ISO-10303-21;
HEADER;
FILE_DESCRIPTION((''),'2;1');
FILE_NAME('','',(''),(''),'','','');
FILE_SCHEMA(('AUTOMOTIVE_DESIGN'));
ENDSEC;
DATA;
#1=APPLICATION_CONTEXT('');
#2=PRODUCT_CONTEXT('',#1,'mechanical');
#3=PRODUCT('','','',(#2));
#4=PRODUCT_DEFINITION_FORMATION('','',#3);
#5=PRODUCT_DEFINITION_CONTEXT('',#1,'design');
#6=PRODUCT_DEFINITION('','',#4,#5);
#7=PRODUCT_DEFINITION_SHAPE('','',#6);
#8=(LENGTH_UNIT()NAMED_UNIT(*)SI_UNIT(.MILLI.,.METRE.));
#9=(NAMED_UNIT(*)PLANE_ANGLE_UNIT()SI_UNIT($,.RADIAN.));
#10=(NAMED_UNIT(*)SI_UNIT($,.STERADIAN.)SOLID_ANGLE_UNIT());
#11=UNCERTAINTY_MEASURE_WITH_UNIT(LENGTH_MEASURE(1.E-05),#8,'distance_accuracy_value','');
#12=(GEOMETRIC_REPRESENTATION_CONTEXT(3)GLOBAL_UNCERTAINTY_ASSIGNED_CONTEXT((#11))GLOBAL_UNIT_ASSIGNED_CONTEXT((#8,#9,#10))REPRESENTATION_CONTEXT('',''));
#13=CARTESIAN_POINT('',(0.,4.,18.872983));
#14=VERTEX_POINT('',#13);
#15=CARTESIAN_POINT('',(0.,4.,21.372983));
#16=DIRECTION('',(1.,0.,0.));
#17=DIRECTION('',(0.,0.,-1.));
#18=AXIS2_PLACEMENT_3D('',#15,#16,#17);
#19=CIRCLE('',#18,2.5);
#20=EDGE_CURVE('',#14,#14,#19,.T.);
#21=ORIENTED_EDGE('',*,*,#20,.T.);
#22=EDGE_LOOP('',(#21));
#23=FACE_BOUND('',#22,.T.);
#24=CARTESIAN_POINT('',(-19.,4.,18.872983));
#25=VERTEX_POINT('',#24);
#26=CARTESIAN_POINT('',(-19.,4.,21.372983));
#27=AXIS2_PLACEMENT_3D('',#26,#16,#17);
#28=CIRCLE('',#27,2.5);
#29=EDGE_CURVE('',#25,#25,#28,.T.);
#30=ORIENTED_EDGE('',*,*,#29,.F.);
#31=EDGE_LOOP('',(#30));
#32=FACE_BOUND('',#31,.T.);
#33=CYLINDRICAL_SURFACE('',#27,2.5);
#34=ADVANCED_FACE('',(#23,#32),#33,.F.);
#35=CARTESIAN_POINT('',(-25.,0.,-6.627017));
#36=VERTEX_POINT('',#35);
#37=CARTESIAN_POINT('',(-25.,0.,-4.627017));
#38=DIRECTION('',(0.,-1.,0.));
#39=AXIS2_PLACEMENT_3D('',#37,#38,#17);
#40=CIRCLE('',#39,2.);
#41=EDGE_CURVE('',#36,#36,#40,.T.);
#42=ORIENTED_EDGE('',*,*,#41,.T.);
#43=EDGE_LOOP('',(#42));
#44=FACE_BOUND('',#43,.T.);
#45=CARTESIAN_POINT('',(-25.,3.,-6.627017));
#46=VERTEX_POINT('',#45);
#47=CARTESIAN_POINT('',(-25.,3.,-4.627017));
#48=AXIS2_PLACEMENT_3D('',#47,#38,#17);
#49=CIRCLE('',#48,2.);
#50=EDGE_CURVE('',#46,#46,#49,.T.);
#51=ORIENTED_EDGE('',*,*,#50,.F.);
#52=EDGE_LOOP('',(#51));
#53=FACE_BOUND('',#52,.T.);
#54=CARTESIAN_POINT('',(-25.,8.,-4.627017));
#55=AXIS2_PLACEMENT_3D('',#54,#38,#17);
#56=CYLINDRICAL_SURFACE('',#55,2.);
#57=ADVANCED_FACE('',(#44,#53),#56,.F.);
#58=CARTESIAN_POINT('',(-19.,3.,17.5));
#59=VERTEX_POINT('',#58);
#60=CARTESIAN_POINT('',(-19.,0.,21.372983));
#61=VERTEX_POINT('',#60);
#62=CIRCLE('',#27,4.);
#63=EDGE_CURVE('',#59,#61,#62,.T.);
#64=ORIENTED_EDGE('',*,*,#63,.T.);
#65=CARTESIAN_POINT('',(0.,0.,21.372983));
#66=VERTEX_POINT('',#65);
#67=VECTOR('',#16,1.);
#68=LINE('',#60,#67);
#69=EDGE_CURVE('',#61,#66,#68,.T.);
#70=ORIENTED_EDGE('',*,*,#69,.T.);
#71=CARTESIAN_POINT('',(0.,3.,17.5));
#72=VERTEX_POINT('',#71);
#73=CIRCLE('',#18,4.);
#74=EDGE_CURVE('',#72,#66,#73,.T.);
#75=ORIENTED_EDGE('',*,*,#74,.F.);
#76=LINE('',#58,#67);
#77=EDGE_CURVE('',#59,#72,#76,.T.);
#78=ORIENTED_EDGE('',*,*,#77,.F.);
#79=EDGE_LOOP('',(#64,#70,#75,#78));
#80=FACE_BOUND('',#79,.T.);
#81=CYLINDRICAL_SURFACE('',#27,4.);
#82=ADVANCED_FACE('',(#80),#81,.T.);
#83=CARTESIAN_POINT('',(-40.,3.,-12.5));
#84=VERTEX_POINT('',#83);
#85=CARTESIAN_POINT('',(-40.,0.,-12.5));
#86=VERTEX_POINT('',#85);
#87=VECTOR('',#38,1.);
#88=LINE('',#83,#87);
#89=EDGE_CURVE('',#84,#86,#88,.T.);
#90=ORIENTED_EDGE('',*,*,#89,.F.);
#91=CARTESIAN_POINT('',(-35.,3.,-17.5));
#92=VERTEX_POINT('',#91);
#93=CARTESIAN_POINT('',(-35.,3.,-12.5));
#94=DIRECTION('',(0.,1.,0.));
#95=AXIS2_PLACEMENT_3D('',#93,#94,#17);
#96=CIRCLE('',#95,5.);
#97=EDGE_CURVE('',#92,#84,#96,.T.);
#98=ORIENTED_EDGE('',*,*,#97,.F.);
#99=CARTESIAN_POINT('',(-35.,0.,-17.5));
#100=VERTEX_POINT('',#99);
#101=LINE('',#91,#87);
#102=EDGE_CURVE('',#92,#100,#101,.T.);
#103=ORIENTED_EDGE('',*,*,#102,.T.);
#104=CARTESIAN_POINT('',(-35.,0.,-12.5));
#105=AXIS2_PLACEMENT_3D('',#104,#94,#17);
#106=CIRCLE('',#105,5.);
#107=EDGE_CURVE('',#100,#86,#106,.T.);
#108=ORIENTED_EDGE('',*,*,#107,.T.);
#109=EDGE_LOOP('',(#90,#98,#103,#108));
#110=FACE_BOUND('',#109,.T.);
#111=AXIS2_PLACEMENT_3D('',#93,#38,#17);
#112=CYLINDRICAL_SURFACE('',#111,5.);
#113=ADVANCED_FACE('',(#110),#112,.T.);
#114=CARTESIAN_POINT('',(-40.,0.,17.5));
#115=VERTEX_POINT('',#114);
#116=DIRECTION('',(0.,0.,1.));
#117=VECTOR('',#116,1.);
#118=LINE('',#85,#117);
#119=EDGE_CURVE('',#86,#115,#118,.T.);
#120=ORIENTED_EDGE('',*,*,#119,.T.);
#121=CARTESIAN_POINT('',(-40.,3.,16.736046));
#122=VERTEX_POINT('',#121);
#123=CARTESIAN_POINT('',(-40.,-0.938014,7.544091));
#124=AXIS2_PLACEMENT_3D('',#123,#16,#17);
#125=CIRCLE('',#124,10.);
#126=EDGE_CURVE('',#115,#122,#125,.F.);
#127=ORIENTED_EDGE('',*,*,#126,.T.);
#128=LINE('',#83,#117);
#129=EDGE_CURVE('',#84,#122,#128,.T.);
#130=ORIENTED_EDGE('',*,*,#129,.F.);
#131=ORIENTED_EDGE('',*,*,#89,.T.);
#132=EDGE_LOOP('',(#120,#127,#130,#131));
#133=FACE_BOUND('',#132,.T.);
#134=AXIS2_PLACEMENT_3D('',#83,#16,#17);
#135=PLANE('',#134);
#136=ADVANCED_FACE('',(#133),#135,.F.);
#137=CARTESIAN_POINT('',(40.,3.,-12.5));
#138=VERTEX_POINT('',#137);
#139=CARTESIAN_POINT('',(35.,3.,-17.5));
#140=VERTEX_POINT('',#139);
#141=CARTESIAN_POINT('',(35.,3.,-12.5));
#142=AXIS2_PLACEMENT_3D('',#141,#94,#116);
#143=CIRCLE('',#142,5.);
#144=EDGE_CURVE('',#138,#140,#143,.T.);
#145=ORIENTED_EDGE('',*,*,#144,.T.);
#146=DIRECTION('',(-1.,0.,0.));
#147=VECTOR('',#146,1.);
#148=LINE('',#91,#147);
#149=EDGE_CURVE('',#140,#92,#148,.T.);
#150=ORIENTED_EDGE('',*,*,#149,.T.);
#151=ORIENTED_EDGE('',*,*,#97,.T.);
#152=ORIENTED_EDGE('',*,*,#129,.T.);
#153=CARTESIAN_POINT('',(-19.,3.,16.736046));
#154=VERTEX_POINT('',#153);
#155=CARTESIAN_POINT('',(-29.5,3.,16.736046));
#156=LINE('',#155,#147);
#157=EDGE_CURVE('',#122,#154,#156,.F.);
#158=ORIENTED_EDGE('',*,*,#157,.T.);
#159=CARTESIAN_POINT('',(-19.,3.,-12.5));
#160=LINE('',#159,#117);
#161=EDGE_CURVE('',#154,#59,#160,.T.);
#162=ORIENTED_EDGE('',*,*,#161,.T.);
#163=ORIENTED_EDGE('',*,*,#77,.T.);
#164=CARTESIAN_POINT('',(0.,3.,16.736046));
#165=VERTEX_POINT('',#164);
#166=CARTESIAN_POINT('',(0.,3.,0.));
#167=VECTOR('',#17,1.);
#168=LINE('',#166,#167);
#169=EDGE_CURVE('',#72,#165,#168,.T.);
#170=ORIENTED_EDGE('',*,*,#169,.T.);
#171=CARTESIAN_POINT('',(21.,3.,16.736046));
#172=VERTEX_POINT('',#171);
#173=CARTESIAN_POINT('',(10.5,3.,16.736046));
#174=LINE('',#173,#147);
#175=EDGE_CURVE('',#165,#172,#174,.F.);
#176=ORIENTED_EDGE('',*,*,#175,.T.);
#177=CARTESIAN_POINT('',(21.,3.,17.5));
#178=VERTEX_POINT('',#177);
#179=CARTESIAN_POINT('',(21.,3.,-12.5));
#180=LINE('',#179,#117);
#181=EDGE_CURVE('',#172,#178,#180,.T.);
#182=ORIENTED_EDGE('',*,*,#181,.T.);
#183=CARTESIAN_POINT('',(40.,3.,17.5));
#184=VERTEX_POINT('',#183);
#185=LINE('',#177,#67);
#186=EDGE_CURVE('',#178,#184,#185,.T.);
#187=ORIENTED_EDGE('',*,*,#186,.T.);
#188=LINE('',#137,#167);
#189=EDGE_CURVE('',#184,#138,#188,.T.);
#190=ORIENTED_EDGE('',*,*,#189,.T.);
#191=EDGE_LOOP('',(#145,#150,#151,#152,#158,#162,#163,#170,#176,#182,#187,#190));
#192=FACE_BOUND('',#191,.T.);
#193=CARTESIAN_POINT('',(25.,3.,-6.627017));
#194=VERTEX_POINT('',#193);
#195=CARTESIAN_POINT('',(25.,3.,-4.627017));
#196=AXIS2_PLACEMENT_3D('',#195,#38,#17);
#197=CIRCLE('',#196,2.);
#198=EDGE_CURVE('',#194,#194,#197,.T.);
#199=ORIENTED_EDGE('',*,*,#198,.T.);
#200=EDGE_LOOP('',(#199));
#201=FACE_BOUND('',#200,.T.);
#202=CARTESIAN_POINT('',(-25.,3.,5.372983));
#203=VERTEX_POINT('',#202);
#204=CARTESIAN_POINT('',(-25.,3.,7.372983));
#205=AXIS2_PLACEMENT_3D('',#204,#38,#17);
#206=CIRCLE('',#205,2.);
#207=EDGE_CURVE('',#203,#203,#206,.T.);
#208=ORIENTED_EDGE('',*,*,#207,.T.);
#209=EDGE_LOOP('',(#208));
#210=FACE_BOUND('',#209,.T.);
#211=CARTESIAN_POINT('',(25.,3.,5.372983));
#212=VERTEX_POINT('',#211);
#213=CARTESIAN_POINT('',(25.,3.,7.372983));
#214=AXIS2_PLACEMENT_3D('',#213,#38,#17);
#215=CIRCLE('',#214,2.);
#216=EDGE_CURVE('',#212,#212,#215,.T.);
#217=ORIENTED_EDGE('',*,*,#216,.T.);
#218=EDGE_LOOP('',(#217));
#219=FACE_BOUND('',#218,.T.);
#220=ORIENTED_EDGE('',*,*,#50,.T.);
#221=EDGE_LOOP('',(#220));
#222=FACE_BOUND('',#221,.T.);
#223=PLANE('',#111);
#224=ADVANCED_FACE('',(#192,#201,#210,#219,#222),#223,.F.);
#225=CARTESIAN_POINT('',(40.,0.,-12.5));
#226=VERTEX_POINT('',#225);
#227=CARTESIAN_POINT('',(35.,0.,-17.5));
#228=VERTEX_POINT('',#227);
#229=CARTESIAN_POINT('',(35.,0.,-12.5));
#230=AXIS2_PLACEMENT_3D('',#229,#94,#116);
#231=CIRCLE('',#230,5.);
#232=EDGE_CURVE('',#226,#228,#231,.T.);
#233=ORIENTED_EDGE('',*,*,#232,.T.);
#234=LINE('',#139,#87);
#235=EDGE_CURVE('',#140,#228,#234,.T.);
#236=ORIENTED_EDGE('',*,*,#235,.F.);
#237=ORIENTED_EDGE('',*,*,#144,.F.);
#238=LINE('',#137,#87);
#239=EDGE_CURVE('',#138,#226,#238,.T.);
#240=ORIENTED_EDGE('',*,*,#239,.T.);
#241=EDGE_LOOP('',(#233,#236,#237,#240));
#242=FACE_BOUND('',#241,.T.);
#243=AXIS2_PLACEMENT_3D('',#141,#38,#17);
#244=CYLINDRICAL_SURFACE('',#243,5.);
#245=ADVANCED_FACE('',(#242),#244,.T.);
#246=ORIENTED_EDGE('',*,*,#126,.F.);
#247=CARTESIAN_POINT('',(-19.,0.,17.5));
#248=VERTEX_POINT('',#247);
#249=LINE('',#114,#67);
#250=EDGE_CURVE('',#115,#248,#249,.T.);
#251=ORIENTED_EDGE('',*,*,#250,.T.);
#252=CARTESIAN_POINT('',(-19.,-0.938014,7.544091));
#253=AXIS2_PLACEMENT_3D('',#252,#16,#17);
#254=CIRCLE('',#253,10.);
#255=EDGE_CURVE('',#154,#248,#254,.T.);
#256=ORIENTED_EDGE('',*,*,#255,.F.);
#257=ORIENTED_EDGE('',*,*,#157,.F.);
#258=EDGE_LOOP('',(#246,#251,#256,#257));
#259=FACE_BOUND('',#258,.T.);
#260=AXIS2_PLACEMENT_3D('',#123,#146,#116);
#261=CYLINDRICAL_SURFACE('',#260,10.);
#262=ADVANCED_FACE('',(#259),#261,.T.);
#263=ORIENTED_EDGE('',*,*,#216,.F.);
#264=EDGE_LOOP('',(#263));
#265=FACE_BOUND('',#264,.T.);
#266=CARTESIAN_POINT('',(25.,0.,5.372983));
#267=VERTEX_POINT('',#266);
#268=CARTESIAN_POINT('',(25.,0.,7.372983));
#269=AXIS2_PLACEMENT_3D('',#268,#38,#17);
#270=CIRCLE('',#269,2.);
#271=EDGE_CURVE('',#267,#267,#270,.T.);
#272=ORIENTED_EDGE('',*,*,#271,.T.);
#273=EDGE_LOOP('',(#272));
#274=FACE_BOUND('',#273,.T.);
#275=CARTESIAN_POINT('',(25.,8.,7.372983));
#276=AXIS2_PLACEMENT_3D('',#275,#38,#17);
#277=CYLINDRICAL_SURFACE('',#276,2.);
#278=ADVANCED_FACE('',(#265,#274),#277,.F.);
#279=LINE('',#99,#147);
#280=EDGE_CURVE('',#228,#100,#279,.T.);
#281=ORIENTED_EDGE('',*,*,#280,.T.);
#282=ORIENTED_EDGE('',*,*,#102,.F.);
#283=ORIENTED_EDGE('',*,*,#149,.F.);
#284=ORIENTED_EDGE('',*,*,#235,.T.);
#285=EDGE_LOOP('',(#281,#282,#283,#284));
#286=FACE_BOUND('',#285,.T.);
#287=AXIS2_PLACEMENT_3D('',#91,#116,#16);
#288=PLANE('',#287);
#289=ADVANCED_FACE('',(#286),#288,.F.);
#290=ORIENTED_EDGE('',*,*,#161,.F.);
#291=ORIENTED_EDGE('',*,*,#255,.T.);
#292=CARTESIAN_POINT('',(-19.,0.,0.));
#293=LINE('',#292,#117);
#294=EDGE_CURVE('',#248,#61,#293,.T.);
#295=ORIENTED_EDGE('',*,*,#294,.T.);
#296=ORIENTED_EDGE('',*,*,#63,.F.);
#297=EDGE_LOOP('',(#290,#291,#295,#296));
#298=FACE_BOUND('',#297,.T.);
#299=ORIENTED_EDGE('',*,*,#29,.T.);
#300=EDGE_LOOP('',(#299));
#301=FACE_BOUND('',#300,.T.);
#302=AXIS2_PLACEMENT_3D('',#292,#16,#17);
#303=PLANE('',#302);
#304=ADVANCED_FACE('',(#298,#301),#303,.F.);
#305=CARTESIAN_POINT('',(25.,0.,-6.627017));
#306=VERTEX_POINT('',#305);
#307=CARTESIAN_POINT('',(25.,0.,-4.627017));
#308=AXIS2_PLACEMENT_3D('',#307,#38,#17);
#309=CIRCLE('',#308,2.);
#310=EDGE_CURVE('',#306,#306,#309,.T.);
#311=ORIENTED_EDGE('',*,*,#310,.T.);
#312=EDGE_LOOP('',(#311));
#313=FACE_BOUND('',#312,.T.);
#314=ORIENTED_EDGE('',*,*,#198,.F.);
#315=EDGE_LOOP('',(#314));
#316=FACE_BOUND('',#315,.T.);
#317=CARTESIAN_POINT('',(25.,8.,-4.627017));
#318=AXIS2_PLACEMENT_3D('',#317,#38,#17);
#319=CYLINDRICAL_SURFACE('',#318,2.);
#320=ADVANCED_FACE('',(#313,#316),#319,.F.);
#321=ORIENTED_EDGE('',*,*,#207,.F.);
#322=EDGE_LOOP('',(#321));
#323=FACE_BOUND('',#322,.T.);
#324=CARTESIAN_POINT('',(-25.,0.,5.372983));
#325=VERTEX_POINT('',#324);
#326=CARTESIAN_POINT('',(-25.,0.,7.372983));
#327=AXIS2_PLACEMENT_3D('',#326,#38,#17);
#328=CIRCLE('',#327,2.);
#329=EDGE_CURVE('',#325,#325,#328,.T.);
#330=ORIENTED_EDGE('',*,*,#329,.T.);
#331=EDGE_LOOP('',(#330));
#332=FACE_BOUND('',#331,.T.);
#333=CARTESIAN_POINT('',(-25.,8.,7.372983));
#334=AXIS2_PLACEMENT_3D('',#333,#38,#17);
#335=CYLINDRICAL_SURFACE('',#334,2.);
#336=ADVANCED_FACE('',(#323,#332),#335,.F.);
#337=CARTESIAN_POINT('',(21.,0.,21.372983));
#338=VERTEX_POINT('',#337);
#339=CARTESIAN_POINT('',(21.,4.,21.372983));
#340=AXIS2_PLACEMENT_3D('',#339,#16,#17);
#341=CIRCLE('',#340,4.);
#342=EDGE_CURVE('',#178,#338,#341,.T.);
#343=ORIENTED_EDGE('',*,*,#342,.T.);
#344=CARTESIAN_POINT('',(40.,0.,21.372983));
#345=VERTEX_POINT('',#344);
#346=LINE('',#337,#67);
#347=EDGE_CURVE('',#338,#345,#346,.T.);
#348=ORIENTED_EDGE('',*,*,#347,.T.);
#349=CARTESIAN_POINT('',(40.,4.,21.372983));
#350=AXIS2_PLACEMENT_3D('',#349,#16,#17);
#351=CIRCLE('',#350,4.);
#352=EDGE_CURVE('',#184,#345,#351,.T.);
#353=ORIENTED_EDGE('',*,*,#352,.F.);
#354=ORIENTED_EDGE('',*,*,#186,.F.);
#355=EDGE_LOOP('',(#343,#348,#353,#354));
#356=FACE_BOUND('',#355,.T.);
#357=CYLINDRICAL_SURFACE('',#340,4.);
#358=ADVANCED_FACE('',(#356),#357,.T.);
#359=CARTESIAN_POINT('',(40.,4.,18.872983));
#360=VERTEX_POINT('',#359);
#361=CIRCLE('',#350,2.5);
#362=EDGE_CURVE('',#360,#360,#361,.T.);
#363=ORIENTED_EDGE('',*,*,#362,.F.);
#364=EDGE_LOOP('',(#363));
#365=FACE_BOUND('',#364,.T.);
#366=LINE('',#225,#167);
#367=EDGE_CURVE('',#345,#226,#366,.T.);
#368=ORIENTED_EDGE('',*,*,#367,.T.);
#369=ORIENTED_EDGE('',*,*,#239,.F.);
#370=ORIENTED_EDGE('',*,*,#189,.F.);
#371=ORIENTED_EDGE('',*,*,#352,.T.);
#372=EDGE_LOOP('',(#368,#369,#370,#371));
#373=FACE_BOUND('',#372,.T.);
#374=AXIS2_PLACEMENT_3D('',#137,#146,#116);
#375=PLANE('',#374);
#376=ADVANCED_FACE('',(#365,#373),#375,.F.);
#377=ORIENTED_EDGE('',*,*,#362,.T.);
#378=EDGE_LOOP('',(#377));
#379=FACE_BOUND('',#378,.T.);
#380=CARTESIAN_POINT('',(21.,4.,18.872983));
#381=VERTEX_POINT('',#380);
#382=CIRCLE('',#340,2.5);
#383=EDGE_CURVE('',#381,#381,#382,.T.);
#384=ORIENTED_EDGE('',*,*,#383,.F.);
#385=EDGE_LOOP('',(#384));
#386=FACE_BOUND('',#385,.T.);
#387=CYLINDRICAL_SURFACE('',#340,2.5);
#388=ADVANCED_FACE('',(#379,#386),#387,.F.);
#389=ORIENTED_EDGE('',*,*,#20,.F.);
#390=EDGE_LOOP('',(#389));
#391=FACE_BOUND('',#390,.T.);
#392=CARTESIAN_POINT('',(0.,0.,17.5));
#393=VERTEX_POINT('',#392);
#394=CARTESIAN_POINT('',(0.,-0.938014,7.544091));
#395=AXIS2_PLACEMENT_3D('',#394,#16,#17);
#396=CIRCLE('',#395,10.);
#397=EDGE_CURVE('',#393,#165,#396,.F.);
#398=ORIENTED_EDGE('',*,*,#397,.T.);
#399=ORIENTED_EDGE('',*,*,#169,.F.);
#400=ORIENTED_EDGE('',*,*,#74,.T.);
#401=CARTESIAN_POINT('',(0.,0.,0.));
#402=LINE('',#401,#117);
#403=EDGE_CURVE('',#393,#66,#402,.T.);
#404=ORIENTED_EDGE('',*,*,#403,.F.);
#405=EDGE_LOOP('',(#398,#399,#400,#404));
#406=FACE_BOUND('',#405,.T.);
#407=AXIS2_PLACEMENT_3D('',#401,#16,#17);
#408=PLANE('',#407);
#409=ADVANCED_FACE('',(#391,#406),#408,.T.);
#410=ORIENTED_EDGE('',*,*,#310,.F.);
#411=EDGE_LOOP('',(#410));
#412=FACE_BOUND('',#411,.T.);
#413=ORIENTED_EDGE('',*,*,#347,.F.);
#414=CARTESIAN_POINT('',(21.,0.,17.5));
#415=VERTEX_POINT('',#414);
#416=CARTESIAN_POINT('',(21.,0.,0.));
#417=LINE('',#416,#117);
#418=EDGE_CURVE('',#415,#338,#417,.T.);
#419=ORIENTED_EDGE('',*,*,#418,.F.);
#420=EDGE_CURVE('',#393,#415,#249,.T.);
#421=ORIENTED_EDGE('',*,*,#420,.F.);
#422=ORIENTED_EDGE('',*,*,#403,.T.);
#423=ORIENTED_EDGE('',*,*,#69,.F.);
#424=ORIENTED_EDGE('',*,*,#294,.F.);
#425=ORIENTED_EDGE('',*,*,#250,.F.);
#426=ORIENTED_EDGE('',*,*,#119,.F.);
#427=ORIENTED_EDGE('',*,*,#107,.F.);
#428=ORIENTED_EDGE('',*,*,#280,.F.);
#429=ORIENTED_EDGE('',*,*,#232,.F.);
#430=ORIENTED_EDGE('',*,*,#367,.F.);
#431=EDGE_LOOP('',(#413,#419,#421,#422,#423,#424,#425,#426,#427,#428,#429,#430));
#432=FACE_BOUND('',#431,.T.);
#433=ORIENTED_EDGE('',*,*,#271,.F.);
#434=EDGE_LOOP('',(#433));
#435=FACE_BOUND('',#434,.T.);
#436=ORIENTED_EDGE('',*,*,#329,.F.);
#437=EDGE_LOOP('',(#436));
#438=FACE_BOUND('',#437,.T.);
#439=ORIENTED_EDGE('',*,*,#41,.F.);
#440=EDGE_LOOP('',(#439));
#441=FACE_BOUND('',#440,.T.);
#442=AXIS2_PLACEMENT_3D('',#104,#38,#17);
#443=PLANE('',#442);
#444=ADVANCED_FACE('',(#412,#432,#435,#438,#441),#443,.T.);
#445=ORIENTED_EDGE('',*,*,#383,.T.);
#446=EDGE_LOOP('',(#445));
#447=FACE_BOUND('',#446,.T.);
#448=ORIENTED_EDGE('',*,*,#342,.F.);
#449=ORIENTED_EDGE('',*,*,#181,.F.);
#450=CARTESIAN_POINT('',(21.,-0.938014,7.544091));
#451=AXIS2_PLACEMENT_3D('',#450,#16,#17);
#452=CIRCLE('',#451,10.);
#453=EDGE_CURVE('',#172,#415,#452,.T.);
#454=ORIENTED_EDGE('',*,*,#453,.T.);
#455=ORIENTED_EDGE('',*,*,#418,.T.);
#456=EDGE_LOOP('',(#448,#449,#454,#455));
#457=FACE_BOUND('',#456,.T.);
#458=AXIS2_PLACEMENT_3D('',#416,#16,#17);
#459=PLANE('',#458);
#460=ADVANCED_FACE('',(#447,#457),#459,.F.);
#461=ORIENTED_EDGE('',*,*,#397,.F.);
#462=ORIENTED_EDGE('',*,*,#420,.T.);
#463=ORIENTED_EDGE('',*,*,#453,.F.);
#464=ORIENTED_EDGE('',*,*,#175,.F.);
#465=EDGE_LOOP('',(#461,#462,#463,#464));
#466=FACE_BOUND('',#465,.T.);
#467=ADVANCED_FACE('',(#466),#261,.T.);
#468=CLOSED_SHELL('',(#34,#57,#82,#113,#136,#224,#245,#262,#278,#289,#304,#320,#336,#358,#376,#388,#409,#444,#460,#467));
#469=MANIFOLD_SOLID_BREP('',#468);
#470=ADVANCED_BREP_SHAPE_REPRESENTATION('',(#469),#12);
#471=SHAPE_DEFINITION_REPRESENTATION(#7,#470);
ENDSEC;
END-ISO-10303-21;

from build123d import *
from OCP.BRepFilletAPI import BRepFilletAPI_MakeChamfer

# Parameters (mm, degrees)
BOSS_EXTRUDE1_DEPTH = 3
SKETCH2_R           = 2.5
BOSS_EXTRUDE2_DEPTH = 19
LPATTERN1_COUNT     = 2
LPATTERN1_PITCH     = 40
CHAMFER3_SIZE       = 1
CHAMFER3_SIZE2      = 0.624869352
FILLET1_R           = 10
SKETCH_1_R          = 2
CUT_EXTRUDE_1_DEPTH = 49.039445083


with BuildPart() as part:
    # Sketch1 → Boss-Extrude1 (new body)
    with BuildSketch(Plane(origin=(0, 0, 0), x_dir=(1, 0, 0), z_dir=(0, 1, 0))):
        with BuildLine():
            Line((-35, 17.5), (35, 17.5))
            ThreePointArc((35, 17.5), (38.535533906, 16.035533906), (40, 12.5))
            Line((40, 12.5), (40, -17.5))
            Line((40, -17.5), (-40, -17.5))
            Line((-40, -17.5), (-40, 12.5))
            ThreePointArc((-40, 12.5), (-38.535533906, 16.035533906), (-35, 17.5))
        make_face()
    extrude(amount=BOSS_EXTRUDE1_DEPTH)

    # Sketch2 → Boss-Extrude2 (add)
    with BuildSketch(Plane(origin=(40, 0, 0), x_dir=(0, 0, -1), z_dir=(1, 0, 0))):
        with BuildLine():
            Line((-21.372983346, 0), (-17.5, 0))
            Line((-17.5, 0), (-17.5, 3))
            ThreePointArc((-17.5, 3), (-23.822473089, 7.16227766), (-21.372983346, 0))
        make_face()
        with Locations((-21.372983346, 4)):
            Circle(SKETCH2_R, mode=Mode.SUBTRACT)
    boss_extrude2 = extrude(amount=-BOSS_EXTRUDE2_DEPTH)

    # LPattern1: Boss-Extrude2 ×2
    with Locations(*[(-i * LPATTERN1_PITCH, 0, 0) for i in range(1, LPATTERN1_COUNT)]):
        add(boss_extrude2)

    # Chamfer3: one chamfer whose edges measure the first distance from different faces: ONE call of the kernel's chamfer builder (chamfer() names one face for all edges)
    chamfer3_edges_1 = [part.edges().sort_by_distance(p)[0] for p in [
        (-29.5, 3, 17.5),
    ]]
    chamfer3_side_1 = [part.faces().sort_by_distance(p)[0] for p in [
        (-29.5, 1.5, 17.5),
    ]]
    chamfer3_edges_2 = [part.edges().sort_by_distance(p)[0] for p in [
        (10.5, 3, 17.5),
    ]]
    chamfer3_side_2 = [part.faces().sort_by_distance(p)[0] for p in [
        (10.5, 1.5, 17.5),
    ]]
    chamfer3 = BRepFilletAPI_MakeChamfer(part.part.solid().wrapped)
    for e in chamfer3_edges_1:
        chamfer3.Add(CHAMFER3_SIZE, CHAMFER3_SIZE2, e.wrapped, chamfer3_side_1[0].wrapped)  # the first distance lies on this face
    for e in chamfer3_edges_2:
        chamfer3.Add(CHAMFER3_SIZE, CHAMFER3_SIZE2, e.wrapped, chamfer3_side_2[0].wrapped)  # the first distance lies on this face
    add(Compound.cast(chamfer3.Shape()), mode=Mode.REPLACE)

    # Fillet1
    # the kernel refuses this fillet: 10 mm, written as the material it takes off along each edge
    with BuildSketch(Plane(origin=(21, 2, 17.5), x_dir=(0, 0.8480480961564257, -0.5299192642332051), z_dir=(-1, 0, 0))) as fillet1_piece_1:
        with BuildLine():
            CenterArc((2.784251212, 10), FILLET1_R, 243.382335319, 26.617664681)
            Line((-1.696096192, 1.059838528), (0, 0))
            Line((0, 0), (2.784251212, 0))
        make_face()
    extrude(amount=21, mode=Mode.SUBTRACT)
    with BuildSketch(Plane(origin=(-19, 2, 17.5), x_dir=(0, 0.8480480961564257, -0.5299192642332051), z_dir=(-1, 0, 0))) as fillet1_piece_2:
        with BuildLine():
            CenterArc((2.784251212, 10), FILLET1_R, 243.382335319, 26.617664681)
            Line((-1.696096192, 1.059838528), (0, 0))
            Line((0, 0), (2.784251212, 0))
        make_face()
    extrude(amount=27.96062803, mode=Mode.SUBTRACT)

    # 스케치1 → 컷-돌출1 (cut, through all)
    with BuildSketch(Plane.XZ):
        with Locations(Location((-25, 7.372983346, 0), (0, 0, 270))):
            Circle(SKETCH_1_R)
        with Locations(Location((-25, -4.627016654, 0), (0, 0, 270))):
            Circle(SKETCH_1_R)
        with Locations(Location((25, 7.372983346, 0), (0, 0, 270))):
            Circle(SKETCH_1_R)
        with Locations(Location((25, -4.627016654, 0), (0, 0, 270))):
            Circle(SKETCH_1_R)
    extrude(amount=-CUT_EXTRUDE_1_DEPTH, mode=Mode.SUBTRACT)


solid = part.part
